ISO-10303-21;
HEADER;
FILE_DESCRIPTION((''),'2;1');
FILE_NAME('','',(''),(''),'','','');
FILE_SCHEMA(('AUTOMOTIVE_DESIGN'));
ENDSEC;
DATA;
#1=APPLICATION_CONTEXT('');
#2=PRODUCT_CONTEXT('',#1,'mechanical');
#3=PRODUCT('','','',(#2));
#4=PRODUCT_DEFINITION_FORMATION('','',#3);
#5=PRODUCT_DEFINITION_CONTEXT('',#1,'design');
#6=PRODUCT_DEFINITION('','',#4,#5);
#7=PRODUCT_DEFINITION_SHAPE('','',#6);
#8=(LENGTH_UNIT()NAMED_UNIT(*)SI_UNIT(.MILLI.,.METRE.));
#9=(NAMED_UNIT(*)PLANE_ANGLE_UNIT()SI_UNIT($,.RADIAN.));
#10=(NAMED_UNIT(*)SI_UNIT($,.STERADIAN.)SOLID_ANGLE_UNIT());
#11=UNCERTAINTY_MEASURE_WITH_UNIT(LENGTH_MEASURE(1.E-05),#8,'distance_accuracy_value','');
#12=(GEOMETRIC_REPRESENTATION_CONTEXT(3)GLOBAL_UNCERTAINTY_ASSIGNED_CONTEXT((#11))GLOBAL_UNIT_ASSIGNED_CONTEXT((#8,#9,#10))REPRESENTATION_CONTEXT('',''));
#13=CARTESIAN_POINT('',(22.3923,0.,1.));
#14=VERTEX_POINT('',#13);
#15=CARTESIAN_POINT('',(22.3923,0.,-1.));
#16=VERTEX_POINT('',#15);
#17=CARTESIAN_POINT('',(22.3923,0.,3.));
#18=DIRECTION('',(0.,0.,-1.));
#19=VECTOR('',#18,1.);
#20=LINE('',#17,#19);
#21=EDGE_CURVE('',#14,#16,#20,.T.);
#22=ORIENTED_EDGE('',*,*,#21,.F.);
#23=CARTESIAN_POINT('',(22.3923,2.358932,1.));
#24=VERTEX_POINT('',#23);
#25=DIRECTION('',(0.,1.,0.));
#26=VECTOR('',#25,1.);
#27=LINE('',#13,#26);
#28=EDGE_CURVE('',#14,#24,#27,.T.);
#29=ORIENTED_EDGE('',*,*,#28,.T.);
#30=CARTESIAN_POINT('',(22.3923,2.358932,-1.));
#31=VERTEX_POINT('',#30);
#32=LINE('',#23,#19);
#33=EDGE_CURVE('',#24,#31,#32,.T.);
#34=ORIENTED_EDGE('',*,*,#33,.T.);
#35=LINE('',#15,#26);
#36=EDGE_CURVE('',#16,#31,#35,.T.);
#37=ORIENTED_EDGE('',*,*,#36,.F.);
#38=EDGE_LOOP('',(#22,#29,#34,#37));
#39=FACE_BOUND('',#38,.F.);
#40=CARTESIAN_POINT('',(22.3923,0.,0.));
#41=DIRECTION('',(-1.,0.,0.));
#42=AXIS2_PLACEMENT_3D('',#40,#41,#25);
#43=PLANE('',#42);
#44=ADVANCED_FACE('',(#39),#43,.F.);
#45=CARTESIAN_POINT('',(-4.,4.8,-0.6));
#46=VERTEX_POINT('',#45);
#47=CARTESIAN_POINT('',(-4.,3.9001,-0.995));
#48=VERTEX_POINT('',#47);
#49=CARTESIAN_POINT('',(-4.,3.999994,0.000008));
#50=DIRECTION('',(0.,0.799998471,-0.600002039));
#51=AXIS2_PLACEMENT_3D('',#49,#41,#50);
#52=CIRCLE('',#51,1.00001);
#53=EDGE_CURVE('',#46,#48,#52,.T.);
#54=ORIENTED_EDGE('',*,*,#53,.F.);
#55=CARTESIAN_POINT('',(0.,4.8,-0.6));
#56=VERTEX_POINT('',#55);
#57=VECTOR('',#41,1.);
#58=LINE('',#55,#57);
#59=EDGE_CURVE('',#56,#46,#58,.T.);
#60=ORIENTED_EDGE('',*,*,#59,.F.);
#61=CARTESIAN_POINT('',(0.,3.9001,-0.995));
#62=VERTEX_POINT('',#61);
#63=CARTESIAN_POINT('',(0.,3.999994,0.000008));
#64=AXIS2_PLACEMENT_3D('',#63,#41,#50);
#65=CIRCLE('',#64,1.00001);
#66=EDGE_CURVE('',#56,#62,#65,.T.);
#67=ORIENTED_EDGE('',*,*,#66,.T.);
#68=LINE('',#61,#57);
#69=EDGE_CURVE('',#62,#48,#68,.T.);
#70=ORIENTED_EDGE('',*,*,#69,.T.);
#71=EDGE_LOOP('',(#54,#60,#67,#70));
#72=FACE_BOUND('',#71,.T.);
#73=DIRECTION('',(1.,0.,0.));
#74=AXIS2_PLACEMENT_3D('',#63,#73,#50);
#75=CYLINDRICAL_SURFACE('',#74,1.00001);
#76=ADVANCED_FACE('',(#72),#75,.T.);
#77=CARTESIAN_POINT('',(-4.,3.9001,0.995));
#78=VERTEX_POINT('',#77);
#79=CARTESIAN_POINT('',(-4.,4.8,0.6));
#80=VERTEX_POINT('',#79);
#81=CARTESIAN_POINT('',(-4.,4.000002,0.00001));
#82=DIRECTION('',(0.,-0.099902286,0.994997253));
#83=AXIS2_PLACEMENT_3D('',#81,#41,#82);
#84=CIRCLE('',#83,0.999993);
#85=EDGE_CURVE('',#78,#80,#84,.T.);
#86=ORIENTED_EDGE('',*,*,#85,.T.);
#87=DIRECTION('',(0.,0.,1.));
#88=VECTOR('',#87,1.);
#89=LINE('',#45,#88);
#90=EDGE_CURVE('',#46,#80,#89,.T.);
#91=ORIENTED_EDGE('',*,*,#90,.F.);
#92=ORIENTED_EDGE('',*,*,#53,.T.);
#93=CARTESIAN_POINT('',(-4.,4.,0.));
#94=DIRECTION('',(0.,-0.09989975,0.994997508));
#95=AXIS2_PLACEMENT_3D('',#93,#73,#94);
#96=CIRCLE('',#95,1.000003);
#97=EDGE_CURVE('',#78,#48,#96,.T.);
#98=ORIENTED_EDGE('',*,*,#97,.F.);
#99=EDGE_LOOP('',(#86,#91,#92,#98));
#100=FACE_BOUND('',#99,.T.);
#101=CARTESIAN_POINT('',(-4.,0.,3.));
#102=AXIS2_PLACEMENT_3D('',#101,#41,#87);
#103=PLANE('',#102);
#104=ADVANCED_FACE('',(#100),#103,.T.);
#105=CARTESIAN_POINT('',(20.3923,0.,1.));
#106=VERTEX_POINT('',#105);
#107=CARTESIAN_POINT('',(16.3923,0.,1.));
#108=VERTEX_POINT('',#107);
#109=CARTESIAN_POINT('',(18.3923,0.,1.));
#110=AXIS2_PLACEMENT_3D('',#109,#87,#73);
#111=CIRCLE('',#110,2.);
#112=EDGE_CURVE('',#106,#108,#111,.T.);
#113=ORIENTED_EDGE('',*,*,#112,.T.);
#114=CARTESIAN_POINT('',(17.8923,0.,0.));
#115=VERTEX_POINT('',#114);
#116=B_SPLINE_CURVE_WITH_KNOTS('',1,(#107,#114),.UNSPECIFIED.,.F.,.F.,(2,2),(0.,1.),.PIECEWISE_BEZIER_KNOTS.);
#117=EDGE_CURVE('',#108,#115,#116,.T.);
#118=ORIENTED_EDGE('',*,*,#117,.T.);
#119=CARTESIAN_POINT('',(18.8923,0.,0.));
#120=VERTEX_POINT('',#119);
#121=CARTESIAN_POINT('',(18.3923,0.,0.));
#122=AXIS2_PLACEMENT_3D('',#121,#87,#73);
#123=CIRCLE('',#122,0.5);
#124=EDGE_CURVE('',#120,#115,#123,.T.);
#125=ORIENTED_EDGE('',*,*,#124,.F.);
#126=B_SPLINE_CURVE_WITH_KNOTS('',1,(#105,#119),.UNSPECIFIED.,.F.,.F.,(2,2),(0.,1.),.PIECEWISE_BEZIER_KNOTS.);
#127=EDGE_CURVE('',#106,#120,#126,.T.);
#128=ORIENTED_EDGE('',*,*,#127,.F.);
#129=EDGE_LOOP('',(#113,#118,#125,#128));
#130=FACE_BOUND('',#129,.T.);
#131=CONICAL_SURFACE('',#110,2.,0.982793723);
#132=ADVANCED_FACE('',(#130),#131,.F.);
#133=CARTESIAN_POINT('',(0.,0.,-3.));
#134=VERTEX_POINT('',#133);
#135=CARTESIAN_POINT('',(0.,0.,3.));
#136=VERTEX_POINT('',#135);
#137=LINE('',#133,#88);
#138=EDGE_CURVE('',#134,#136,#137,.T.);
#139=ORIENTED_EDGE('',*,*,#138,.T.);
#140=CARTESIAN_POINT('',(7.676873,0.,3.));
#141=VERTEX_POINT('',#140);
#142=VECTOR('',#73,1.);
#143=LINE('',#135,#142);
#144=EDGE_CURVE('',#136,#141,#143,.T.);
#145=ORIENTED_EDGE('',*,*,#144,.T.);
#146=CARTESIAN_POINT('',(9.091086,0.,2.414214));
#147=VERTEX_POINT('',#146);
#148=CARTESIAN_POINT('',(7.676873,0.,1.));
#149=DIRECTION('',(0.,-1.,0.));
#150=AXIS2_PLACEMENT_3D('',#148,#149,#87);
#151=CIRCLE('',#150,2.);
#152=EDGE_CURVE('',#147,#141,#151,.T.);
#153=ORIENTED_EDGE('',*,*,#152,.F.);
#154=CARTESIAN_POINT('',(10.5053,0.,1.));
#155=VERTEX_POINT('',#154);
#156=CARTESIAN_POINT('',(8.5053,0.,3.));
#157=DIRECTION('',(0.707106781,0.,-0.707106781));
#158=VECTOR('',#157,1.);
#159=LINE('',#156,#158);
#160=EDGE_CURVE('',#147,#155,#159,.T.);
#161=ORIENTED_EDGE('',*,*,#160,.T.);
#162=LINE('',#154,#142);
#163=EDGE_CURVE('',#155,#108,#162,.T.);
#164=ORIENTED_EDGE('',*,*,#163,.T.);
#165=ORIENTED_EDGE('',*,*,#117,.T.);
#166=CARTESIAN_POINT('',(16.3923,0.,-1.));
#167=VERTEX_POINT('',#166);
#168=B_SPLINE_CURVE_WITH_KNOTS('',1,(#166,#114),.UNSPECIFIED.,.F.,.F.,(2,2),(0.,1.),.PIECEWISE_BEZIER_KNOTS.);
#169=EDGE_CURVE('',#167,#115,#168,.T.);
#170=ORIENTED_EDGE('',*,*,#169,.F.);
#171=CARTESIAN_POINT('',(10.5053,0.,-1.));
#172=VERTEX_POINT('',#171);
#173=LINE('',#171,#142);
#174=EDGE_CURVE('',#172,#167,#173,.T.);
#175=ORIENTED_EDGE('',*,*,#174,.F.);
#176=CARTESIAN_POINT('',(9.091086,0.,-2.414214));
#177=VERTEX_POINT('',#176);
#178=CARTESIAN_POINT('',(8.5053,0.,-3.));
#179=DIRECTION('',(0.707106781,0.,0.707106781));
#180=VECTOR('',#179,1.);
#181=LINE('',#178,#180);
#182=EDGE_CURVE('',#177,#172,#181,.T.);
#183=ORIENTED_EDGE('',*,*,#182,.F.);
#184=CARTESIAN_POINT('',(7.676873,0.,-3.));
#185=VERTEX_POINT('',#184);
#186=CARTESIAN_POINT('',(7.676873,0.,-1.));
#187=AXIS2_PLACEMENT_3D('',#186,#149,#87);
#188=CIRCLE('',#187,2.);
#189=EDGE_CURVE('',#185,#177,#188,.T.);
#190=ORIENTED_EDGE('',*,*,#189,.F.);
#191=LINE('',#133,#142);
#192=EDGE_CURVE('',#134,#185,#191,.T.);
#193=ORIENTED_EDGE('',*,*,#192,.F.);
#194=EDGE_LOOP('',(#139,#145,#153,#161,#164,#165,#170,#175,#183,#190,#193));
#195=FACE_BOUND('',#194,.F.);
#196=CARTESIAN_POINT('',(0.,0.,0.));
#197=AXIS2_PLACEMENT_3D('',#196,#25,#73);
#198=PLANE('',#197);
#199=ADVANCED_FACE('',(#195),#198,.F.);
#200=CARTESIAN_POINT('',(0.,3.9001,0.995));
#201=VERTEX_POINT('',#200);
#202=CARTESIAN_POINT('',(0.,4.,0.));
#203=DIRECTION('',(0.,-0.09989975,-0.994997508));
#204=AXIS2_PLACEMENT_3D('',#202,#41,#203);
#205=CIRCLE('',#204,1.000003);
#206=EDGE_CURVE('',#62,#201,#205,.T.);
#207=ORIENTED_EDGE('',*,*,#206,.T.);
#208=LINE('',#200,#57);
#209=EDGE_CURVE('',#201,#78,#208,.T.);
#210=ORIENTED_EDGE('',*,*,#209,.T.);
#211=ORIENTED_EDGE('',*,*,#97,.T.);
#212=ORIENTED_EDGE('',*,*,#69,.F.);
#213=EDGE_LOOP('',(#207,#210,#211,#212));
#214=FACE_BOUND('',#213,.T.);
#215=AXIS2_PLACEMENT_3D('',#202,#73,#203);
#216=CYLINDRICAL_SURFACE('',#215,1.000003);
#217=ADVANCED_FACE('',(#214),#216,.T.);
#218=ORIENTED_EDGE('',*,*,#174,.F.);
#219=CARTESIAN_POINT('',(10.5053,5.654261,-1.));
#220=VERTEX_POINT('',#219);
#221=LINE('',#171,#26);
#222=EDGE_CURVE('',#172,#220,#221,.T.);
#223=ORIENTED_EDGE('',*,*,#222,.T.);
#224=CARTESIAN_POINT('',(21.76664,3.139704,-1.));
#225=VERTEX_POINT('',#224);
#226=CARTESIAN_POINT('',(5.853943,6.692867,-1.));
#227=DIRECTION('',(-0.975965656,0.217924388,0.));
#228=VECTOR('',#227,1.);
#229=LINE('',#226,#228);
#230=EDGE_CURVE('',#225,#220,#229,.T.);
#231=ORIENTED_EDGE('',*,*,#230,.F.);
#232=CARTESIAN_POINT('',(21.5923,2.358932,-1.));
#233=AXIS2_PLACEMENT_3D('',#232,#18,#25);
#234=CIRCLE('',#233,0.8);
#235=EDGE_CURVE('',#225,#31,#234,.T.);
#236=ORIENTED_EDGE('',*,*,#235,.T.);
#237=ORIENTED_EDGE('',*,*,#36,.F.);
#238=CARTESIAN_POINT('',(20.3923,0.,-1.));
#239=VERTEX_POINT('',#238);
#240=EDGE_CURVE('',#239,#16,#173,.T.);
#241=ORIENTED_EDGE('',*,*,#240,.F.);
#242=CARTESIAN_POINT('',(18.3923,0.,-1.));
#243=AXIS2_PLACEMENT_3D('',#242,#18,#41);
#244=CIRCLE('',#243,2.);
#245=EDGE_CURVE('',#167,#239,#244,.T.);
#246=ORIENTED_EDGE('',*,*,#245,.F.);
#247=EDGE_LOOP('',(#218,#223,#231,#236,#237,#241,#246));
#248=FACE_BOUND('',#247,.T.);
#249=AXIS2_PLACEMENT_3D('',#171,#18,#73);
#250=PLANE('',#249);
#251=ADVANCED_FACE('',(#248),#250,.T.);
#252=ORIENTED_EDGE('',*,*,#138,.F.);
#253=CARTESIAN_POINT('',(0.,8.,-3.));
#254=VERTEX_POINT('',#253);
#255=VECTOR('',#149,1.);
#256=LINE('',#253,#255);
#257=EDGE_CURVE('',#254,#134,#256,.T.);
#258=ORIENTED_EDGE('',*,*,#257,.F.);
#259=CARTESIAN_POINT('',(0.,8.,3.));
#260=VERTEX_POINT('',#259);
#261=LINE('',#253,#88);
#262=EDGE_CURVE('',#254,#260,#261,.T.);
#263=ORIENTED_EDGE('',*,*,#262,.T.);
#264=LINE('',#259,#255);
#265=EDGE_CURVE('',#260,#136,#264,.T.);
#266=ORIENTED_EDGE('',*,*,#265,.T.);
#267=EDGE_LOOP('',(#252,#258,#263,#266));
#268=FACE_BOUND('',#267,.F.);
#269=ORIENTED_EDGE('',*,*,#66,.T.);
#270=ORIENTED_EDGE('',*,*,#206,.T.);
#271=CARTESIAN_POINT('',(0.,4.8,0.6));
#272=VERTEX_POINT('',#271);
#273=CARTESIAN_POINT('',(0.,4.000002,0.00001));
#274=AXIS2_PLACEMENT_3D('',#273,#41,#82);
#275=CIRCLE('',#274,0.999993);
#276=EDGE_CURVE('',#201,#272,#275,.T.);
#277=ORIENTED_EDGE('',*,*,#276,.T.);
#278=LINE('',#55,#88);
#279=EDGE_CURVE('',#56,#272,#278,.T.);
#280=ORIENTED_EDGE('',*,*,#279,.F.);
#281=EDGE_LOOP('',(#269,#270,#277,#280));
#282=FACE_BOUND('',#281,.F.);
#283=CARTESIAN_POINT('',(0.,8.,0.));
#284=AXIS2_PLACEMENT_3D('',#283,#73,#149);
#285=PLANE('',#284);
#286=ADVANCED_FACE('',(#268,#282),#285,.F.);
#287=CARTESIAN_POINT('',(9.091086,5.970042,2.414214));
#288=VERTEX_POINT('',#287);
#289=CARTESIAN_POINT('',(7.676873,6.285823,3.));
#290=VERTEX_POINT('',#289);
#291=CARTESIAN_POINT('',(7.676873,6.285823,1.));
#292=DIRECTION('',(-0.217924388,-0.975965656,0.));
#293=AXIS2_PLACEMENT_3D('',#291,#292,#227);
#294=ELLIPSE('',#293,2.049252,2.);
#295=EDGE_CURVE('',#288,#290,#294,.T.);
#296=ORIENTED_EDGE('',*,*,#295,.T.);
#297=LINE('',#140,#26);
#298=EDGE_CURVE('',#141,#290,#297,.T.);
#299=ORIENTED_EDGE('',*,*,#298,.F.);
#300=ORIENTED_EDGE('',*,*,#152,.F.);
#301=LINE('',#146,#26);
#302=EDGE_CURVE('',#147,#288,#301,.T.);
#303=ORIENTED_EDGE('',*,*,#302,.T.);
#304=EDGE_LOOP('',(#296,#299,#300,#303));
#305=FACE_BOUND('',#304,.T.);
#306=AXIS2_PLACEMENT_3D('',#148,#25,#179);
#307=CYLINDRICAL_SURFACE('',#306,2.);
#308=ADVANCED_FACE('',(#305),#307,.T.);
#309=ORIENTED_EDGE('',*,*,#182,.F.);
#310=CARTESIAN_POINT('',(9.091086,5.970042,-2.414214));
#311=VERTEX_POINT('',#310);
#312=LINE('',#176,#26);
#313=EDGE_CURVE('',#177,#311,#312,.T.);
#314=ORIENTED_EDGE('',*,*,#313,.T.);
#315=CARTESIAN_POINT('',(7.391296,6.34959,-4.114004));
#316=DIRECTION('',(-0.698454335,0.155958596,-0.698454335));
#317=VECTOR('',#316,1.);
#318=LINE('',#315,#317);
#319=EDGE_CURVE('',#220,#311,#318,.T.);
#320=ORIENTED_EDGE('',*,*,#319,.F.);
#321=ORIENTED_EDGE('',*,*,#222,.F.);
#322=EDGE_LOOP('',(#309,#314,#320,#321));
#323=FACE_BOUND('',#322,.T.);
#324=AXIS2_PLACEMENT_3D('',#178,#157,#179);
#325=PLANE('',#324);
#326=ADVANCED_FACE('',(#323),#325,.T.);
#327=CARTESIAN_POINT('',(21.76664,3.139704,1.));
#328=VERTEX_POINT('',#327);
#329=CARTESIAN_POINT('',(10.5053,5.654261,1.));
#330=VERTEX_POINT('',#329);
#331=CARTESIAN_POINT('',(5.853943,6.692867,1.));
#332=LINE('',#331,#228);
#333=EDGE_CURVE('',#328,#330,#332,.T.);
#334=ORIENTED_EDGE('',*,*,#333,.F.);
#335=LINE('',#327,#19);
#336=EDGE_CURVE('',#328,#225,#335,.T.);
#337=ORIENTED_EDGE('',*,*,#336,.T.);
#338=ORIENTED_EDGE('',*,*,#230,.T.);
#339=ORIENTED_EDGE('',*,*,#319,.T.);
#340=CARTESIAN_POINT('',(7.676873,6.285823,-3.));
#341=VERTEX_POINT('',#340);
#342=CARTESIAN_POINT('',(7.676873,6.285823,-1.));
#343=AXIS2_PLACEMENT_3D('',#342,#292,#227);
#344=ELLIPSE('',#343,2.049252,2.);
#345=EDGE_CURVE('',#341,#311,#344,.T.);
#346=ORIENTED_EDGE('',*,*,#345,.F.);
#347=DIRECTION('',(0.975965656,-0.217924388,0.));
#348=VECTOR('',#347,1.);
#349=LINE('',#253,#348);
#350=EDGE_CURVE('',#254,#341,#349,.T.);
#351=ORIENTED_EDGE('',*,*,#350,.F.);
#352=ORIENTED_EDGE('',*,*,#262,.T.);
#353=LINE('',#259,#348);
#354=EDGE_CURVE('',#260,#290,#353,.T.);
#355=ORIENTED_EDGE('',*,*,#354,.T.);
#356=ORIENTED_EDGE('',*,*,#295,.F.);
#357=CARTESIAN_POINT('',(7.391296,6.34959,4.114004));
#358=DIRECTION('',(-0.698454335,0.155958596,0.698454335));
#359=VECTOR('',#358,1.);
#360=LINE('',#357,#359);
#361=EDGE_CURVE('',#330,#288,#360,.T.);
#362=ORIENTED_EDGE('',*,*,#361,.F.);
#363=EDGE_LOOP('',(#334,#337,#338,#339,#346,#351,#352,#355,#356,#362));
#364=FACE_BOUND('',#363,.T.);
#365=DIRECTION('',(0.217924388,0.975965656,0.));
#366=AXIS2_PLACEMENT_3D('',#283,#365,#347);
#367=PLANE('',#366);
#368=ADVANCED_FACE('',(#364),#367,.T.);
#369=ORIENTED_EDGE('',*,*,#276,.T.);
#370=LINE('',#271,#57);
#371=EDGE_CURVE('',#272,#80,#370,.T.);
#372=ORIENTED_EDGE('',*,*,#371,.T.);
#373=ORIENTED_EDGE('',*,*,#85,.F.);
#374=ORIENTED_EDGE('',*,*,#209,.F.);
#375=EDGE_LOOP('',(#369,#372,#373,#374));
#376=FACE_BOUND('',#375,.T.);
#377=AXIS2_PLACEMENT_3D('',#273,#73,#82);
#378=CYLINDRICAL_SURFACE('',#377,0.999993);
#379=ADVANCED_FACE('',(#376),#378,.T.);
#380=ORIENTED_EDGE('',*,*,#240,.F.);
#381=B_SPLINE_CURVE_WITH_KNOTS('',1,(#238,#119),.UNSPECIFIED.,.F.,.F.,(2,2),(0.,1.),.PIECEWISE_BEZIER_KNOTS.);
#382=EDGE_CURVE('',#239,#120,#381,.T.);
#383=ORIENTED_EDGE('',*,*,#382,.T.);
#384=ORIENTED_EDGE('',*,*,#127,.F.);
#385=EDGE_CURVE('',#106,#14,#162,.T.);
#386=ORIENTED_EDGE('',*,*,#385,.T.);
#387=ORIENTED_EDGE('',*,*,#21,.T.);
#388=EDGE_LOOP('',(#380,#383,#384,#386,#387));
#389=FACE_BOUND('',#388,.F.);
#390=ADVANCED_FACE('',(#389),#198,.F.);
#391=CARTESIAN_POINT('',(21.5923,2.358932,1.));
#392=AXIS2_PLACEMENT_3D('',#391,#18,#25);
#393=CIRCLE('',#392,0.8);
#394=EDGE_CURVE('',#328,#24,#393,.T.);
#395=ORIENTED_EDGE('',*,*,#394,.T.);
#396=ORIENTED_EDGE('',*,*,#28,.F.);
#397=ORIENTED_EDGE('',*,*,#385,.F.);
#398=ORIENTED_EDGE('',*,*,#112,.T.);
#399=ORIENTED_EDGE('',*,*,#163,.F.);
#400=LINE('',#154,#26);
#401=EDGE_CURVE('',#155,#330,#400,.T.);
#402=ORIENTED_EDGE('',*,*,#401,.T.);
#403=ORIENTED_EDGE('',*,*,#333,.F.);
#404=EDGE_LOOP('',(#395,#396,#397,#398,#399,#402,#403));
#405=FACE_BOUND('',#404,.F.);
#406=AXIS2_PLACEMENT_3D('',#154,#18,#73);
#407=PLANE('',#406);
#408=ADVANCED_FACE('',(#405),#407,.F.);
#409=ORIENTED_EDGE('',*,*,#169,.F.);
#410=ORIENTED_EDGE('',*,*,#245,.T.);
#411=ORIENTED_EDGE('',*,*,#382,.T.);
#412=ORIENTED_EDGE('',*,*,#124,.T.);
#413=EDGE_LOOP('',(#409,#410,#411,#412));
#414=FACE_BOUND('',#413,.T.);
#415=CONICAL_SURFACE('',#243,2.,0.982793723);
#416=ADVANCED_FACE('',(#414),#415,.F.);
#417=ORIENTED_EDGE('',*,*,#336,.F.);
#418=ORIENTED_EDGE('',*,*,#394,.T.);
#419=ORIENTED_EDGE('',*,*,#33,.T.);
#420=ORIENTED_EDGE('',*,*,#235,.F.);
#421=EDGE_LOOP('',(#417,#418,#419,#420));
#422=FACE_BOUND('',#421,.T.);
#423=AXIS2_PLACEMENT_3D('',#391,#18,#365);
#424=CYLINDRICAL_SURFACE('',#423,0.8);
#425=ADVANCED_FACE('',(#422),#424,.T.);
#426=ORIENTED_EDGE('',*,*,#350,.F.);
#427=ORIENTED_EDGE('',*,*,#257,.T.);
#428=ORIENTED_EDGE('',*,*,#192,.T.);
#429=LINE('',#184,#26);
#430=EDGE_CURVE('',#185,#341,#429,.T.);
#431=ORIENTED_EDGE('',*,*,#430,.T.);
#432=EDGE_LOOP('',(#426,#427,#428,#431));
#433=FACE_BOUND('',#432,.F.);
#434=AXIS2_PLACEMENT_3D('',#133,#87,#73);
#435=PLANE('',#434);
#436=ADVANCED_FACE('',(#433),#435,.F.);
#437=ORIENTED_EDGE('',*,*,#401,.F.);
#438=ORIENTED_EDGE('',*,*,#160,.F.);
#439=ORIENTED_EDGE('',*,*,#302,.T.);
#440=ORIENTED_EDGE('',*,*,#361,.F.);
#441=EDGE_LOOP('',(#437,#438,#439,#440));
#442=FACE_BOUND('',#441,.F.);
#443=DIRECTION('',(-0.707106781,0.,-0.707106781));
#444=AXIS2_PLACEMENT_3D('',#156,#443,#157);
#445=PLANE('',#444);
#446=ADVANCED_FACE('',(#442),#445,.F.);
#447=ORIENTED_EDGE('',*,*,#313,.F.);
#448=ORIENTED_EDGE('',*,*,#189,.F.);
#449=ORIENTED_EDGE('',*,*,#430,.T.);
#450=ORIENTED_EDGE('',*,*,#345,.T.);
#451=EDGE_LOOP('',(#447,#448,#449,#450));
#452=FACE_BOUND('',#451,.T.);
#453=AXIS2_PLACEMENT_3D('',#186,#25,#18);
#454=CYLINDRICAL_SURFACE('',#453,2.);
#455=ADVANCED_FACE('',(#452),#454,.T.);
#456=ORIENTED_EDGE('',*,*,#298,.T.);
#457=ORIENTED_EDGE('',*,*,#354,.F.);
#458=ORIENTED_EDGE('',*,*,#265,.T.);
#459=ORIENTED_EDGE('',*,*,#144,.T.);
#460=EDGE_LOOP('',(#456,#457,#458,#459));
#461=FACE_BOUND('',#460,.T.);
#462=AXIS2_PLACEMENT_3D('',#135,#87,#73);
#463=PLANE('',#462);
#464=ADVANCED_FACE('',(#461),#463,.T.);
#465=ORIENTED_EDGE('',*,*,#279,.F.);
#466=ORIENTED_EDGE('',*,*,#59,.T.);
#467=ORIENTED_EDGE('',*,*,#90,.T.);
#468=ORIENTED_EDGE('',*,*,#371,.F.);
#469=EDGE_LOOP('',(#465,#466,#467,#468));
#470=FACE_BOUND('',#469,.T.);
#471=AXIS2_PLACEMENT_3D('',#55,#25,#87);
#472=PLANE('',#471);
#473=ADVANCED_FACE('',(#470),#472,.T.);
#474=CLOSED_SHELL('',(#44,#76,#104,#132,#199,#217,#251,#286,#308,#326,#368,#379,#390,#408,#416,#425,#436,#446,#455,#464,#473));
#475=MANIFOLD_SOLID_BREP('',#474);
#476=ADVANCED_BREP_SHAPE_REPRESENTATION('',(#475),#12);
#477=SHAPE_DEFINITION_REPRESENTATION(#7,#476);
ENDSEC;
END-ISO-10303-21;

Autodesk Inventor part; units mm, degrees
ref_plane "YZ Plane" through (0, 0, 0) normal (1, 0, 0) x (0, 1, 0)
sketch "Sketch1" plane through (0, 0, 0) normal (0, 0, 1) x (1, 0, 0)
  line L0 (0, 8) -> (22.3923, 3)
  line L1 (22.3923, 0) -> (22.3923, 3)
  line L2 (0, 0) -> (22.3923, 0)
  line L3 (0, 8) -> (0, 0)
  dimension "d5" = 3
  dimension "d7" = 8
  dimension "d59" = 22.3923
extrude "Extrusion1" add sketch "Sketch1" along normal mid plane 6
sketch "Sketch2" plane through (0, 0, 3) normal (-1, 0, 0) x (0, 0, 1)
  line L0 (-6, 0) -> (-6, 8) projected
  line L1 (0, 3) -> (0, 8) projected
  line L2 (-6, 0) -> (0, 8)
  line L3 (-6, 8) -> (0, 8) projected
  line L4 (0, 8) -> (0, 0) projected
  line L5 (-6, 8) -> (0, 0)
  arc A0 (-3.995, 3.9001) -> (-2.005, 3.9001) centre (-3, 4) ccw
  line L6 (-3.6, 4.8) -> (-2.4, 4.8)
  arc A1 (-2.005, 3.9001) -> (-2.4, 4.8) centre (-3, 4) ccw
  arc A2 (-3.6, 4.8) -> (-3.9949, 3.8993) centre (-3, 4) ccw
  point P0 (-3, 0)
extrude "Extrusion2" add sketch "Sketch2" along normal blind 4 contours A0 A2 L5 L2 | L2 L5 A0 | L6 L2 L5 | L2 A1 A0 L5
sketch "Sketch3" plane through (0, 0, 3) normal (0, -1, 0) x (1, 0, 0)
  line L0 (22.3923, -6) -> (0, -6) projected
  line L1 (8.5053, -6) -> (10.5053, -4)
  line L2 (10.5053, -4) -> (22.3923, -4)
  line L3 (22.3923, 0) -> (22.3923, -6) projected
  line L4 (22.3923, -4) -> (22.3923, -6)
  line L5 (22.3923, -6) -> (8.5053, -6)
  line L6 (8.5053, 0) -> (10.5053, -2)
  line L7 (10.5053, -2) -> (22.3923, -2)
  line L8 (22.3923, -2) -> (22.3923, 5.9236)
  line L9 (22.3923, 0) -> (0, 0) projected
  line L10 (8.5053, 0) -> (22.3923, 0)
  point P0 (0, -3)
  dimension "d13" = 2
  dimension "d14" = 2
  dimension "d15" = 45
extrude "Extrusion3" cut sketch "Sketch3" against normal through all
ref_plane "Work Plane2" through (15.7073, 3, 0) normal (-1, 0, 0) x (0, 0, -1)
ref_plane "Work Plane1" through (22.3923, 3, 0) normal (-1, 0, 0) x (0, 0, -1)
fillet "Fillet8" radius 2 1 edges at (8.5053, 3.0504, 3)
fillet "Fillet9" radius 2 1 edges at (8.5053, 3.0504, -3)
fillet "Fillet11" radius 0.8 1 edges at (22.3923, 3, 0)
sketch "Sketch13" plane through (10.5053, 0, 1) normal (0, 0, 1) x (1, 0, 0)
  line L0 (0, 0) -> (11.887, 0) projected
  arc A0 (9.887, 0) -> (5.887, 0) centre (7.887, 0) ccw
  point P0 (-10.5053, 0)
  dimension "d86" = 4
  dimension "d88" = 4
ref_plane "Work Plane5" through (10.5053, 0, 0) normal (0, 0, 1) x (1, 0, 0)
sketch "Sketch14" plane through (10.5053, 0, 0) normal (0, 0, 1) x (1, 0, 0)
  line L0 (0, 0) -> (11.887, 0) projected
  arc A0 (8.387, 0) -> (7.387, 0) centre (7.887, 0) ccw
  point P0 (-10.5053, 0)
  dimension "d89" = 4
  dimension "d90" = 1
loft "Loft1" cut profiles "Sketch13", "Sketch14"
sketch "Sketch16" plane through (22.3923, 0, -1) normal (0, 0, -1) x (-1, 0, 0)
  arc A0 (6, 0) -> (2, 0) centre (4, 0) ccw
  line L0 (0, 0) -> (2, 0) projected
  line L1 (6, 0) -> (11.887, 0) projected
  line L2 (2, 0) -> (6, 0)
  line L3 (11.887, 0) -> (0, 0) projected
  point P0 (22.3923, 0)
  dimension "d98" = 4
  dimension "d99" = 4
sketch "Sketch17" plane through (10.5053, 0, 0) normal (0, 0, 1) x (1, 0, 0)
  line L0 (11.887, 2.3589) -> (11.887, 0) projected
  line L1 (9.887, 0) -> (8.387, 0) projected
  line L2 (8.8124, 0) -> (7.1201, 0)
  arc A0 (8.387, 0) -> (7.387, 0) centre (7.887, 0) ccw
  point P0 (-10.5053, 0)
  dimension "d102" = 4
  dimension "d103" = 1
loft "Loft2" cut profiles "Sketch16" section 2 edges at (18.3923, 0.5, 0) (18.3923, 0, 0)
properties part number "blade" material "Stainless Steel"
